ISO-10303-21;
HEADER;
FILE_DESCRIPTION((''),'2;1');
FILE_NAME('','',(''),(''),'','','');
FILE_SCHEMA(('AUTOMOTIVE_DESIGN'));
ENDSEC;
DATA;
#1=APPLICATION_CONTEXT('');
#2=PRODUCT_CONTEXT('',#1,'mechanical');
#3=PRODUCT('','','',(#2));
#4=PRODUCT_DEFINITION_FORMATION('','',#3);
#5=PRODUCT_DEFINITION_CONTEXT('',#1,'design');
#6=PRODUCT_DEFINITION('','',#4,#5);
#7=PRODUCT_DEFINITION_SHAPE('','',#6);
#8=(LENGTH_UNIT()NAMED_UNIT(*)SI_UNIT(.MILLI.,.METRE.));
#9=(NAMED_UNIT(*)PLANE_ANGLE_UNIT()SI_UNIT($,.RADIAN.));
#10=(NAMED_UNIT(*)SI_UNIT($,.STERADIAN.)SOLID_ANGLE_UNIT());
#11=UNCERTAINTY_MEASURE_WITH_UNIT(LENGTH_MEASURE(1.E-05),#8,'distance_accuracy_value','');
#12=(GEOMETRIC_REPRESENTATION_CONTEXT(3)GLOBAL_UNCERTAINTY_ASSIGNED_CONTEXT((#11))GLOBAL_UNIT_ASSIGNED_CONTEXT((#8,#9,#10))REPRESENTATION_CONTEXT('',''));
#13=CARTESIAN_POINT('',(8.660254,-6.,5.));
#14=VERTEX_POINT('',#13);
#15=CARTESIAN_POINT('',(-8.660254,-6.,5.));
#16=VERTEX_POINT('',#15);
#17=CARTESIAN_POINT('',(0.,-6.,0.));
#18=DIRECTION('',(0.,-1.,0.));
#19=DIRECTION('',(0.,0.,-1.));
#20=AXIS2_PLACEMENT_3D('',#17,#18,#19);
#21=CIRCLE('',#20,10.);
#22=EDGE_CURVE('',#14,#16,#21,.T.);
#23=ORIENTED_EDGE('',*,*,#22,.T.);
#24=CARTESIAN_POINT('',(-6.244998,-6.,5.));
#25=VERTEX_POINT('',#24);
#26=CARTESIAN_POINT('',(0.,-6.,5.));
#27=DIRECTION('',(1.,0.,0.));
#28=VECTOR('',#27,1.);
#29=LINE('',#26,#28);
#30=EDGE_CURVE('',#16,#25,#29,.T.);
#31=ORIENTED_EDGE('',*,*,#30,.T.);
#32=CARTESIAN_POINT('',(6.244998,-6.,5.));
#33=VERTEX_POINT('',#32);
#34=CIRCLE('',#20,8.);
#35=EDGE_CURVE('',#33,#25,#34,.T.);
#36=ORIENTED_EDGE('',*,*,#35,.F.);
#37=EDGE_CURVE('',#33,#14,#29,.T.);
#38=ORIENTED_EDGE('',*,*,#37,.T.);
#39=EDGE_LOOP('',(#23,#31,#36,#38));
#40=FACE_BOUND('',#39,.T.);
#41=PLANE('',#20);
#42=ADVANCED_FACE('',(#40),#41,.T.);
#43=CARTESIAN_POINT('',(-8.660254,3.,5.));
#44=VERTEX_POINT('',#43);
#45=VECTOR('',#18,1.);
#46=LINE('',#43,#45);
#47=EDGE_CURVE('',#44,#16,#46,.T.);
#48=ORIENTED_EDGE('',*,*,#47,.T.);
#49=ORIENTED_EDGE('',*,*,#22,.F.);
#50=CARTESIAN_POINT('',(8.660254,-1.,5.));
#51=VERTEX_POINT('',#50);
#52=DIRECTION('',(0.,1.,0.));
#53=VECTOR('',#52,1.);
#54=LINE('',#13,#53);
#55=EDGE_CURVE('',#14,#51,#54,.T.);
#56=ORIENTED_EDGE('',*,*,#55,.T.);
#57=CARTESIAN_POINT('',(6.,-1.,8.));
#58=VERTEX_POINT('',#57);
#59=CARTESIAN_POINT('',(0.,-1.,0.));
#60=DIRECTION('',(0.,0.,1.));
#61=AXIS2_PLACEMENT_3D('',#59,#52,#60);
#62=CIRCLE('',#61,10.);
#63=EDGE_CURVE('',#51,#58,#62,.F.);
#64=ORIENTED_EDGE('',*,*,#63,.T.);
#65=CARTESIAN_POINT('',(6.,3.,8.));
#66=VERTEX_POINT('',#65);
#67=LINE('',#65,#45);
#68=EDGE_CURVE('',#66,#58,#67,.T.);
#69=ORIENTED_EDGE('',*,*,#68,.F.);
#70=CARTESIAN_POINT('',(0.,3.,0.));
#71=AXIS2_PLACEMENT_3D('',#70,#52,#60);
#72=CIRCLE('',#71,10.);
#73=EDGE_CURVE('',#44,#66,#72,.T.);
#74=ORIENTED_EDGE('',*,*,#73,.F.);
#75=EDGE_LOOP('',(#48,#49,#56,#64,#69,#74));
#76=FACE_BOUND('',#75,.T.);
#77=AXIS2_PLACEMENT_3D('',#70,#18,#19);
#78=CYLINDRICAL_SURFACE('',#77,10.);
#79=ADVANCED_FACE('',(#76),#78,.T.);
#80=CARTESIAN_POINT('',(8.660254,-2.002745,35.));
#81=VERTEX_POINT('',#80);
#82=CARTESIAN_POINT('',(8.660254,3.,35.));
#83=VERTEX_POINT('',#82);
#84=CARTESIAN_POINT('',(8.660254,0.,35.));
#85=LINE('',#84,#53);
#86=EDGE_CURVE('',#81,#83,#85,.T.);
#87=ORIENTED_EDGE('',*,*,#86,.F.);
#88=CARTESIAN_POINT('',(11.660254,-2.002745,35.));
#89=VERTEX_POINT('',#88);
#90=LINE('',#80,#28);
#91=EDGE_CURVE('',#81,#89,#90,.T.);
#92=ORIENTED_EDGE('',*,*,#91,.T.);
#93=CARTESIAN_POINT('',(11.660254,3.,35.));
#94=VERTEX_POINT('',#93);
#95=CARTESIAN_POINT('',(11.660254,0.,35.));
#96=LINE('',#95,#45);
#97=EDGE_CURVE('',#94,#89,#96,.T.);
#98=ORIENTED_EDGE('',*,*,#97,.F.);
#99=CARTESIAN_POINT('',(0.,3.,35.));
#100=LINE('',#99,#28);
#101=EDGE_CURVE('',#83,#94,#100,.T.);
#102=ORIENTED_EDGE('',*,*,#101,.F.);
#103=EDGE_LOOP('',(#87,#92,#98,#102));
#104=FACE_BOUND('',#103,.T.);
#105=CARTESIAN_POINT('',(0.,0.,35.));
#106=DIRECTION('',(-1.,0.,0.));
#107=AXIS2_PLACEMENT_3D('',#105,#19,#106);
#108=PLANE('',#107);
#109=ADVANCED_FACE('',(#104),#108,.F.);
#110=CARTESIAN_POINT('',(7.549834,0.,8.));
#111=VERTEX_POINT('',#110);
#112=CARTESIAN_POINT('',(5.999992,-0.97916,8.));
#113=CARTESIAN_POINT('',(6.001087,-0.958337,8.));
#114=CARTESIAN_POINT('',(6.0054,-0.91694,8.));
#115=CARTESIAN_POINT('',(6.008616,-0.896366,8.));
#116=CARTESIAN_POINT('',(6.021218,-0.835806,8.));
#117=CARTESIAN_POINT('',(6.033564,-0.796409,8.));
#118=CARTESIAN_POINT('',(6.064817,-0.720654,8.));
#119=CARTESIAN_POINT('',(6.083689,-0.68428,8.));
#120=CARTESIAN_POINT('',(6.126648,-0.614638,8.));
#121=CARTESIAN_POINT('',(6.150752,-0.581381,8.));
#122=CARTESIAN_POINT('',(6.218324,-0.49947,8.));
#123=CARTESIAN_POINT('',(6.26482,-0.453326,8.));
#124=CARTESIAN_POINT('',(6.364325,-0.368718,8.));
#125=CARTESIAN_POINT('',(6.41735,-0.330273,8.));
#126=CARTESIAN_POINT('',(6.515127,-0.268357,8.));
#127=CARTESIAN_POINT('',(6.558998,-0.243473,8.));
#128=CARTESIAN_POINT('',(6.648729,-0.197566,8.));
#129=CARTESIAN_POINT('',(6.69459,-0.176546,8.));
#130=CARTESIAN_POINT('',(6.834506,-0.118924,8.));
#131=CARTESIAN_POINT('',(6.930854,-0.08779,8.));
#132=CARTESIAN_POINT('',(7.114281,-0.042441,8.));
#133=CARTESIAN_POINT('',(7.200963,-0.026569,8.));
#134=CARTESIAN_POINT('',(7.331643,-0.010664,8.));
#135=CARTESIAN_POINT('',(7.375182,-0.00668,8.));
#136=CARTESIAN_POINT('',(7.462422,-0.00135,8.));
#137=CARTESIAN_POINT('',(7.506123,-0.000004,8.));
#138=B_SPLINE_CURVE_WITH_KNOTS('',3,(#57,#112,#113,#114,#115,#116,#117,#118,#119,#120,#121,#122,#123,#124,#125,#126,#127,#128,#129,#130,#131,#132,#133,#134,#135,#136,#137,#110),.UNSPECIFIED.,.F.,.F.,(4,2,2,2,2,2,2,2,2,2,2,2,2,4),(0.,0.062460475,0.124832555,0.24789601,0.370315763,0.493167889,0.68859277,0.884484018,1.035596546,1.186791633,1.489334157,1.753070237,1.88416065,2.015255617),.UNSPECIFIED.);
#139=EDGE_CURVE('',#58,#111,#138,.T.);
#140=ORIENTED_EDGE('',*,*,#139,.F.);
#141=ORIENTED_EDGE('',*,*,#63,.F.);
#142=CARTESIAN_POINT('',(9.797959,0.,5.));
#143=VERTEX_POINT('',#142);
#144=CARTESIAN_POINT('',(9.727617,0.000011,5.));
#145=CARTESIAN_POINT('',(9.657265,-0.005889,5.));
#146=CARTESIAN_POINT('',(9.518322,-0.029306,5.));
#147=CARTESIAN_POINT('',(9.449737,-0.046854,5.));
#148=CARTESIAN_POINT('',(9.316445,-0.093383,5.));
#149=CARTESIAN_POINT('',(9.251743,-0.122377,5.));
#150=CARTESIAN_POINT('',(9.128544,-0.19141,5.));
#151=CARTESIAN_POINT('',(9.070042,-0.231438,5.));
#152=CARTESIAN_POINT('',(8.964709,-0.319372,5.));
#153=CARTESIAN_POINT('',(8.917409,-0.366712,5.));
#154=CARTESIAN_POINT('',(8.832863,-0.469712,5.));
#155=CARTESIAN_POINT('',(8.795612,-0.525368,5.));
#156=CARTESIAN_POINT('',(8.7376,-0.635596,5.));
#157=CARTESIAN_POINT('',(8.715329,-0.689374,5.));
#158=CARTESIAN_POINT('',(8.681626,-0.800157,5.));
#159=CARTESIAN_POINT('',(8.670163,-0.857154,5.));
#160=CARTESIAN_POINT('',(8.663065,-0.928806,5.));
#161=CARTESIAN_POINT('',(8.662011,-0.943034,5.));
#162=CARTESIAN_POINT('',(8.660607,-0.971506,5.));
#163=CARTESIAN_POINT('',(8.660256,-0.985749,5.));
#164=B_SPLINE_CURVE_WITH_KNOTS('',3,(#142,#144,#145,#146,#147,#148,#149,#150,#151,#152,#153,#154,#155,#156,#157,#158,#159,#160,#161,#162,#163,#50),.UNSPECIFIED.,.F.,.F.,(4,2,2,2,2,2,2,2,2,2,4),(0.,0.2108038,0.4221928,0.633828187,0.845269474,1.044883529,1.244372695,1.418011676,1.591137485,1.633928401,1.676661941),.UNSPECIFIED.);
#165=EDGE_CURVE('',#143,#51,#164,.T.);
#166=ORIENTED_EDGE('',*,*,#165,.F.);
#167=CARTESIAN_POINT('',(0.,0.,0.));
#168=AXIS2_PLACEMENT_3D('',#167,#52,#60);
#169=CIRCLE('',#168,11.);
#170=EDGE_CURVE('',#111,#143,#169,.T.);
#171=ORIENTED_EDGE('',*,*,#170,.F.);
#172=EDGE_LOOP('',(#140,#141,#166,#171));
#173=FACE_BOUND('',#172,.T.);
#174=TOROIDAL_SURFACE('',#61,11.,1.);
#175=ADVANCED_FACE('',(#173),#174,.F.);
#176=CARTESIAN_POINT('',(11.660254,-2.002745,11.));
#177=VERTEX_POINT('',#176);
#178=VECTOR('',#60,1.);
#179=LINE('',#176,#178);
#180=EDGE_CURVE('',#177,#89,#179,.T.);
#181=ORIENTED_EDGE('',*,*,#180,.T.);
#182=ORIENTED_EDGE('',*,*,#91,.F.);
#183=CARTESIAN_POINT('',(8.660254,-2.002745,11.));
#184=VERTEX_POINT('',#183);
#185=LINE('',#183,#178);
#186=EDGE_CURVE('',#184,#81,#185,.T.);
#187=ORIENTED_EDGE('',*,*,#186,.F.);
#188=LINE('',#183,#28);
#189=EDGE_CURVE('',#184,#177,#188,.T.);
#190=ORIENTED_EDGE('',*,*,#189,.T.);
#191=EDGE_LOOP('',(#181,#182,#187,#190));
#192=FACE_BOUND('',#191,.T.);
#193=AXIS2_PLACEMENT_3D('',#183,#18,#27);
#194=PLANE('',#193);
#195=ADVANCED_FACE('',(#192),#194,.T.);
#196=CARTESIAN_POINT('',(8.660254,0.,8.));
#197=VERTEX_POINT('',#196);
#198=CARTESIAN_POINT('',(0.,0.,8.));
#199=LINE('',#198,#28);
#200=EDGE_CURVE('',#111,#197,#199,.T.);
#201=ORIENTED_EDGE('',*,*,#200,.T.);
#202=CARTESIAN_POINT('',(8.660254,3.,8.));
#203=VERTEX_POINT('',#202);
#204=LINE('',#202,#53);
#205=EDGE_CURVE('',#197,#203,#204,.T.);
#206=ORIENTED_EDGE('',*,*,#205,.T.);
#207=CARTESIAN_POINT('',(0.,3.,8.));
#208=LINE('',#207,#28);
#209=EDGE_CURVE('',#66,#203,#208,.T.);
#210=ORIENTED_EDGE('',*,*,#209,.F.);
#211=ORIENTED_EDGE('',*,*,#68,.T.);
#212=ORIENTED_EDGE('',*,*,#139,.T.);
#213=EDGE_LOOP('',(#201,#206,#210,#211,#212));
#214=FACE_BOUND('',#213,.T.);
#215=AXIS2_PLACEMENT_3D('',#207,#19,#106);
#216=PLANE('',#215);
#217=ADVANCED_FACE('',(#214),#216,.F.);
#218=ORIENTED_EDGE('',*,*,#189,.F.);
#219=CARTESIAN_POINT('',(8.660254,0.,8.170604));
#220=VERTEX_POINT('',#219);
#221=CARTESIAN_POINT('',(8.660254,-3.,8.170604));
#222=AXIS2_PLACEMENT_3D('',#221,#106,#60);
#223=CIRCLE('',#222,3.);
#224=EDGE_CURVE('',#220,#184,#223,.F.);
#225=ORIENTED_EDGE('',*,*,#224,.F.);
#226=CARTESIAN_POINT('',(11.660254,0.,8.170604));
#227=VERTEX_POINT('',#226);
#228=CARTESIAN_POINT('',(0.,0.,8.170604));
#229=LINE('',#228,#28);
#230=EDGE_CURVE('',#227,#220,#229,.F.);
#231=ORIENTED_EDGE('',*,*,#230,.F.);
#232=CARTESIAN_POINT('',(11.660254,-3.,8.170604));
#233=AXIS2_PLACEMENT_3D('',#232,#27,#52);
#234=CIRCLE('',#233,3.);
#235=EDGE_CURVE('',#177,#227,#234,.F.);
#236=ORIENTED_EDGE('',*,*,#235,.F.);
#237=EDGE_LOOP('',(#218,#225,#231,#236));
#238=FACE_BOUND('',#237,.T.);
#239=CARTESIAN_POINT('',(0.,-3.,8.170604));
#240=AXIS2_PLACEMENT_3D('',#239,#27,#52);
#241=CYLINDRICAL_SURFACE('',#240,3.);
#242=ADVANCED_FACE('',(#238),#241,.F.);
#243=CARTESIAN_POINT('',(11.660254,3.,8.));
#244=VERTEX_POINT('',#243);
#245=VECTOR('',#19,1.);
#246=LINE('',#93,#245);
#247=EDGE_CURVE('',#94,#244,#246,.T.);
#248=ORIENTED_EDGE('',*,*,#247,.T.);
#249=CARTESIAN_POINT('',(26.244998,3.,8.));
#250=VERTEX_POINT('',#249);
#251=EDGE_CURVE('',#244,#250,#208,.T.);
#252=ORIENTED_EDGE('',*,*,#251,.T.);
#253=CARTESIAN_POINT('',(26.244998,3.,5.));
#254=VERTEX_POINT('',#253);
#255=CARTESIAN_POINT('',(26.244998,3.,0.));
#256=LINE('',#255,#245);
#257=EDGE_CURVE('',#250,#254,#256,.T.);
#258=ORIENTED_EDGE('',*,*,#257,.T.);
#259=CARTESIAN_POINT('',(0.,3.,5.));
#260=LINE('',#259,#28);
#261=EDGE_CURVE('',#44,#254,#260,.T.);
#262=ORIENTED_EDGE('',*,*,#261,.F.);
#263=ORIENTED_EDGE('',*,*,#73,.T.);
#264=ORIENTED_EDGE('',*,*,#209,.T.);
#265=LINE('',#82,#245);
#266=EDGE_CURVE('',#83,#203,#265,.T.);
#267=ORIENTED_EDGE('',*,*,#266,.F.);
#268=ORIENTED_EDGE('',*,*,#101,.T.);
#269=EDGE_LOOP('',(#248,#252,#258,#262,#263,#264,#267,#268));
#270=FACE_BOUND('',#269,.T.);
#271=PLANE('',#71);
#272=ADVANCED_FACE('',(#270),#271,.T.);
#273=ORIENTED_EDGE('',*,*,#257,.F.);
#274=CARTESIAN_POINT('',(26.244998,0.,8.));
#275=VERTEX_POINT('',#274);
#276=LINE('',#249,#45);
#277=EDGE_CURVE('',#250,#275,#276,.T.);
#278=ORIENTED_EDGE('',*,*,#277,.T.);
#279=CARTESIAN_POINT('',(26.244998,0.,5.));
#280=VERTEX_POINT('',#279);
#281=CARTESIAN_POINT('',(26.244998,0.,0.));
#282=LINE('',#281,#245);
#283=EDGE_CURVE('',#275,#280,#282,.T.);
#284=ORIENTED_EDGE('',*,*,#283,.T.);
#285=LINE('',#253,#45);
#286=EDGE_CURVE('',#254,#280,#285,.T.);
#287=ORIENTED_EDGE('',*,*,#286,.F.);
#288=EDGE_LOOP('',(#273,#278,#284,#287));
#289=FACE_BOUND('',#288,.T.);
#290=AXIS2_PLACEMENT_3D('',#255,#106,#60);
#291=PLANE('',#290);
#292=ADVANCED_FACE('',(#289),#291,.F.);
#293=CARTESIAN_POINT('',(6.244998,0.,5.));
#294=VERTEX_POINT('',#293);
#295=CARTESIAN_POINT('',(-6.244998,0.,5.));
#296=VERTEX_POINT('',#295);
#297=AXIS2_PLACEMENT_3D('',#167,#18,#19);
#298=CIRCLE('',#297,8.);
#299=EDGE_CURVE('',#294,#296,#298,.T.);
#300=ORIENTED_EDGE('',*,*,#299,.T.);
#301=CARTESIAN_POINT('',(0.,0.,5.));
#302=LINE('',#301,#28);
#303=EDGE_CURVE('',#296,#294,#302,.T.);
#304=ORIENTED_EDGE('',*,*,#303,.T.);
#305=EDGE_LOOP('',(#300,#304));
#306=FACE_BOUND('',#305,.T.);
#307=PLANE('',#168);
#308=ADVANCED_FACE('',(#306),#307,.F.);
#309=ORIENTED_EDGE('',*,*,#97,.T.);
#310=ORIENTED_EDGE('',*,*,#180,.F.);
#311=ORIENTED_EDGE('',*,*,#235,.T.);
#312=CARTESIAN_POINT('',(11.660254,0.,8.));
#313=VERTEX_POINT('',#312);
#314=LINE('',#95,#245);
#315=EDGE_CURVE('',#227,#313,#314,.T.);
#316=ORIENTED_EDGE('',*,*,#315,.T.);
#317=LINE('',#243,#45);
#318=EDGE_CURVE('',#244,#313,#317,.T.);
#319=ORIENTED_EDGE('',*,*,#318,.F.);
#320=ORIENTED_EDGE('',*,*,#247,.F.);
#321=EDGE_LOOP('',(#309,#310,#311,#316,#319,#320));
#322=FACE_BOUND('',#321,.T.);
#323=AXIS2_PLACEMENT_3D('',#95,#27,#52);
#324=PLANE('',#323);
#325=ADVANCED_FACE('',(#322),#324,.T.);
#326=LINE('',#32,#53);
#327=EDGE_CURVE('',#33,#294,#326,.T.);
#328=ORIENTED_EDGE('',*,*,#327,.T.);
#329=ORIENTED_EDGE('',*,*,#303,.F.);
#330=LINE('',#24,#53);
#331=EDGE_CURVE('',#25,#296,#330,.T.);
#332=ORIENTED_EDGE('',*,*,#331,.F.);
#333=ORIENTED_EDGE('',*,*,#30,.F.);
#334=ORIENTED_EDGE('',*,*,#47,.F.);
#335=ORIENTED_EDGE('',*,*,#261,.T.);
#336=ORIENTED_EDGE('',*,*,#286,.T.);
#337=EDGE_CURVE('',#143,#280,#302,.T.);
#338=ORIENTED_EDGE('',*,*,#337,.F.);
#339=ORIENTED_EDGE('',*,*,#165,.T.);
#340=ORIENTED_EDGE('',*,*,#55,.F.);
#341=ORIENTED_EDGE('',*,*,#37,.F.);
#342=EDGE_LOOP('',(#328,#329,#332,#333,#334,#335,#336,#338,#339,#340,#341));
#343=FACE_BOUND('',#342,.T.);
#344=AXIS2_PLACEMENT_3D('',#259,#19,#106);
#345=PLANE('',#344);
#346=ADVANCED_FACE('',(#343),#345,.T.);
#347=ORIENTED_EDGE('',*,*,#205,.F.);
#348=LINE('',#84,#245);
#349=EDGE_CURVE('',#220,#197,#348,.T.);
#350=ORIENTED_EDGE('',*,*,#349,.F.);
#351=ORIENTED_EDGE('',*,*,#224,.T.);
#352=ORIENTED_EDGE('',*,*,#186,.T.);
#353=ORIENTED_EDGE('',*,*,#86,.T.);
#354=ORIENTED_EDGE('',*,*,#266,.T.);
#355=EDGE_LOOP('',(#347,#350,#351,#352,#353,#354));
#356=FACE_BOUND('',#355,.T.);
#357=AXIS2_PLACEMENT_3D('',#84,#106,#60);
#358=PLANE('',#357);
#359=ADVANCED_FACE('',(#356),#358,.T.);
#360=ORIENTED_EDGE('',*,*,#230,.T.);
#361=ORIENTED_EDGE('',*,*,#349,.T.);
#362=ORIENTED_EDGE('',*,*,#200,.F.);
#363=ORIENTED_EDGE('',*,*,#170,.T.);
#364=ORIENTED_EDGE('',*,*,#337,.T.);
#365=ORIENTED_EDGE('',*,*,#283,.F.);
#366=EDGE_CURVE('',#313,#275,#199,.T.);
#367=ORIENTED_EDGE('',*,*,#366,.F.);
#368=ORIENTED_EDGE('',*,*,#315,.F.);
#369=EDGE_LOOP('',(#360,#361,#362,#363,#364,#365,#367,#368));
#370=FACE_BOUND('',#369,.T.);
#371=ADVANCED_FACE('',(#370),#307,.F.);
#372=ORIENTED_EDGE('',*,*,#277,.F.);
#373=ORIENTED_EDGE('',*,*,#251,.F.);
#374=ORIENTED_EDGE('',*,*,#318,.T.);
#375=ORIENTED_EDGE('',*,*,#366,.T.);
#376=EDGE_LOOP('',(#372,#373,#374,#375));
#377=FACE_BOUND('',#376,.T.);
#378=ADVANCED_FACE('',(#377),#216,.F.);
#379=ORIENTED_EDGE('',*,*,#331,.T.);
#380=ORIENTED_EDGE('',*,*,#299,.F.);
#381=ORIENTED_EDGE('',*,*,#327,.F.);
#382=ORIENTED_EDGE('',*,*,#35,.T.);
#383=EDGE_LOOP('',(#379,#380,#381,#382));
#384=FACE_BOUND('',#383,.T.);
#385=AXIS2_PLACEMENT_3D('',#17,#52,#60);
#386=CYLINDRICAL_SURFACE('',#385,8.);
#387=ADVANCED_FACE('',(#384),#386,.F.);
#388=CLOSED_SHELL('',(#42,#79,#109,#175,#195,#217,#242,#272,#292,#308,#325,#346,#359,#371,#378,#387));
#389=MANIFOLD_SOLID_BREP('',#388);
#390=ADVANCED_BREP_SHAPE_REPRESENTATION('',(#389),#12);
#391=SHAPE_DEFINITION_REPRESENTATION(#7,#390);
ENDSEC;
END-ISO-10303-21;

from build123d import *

# Parameters (mm, degrees)
EXTRUDE_1_DEPTH = 3
EXTRUDE_START   = 6
EXTRUDE_2_DEPTH = 6
EXTRUDE_6_DEPTH = 30
FILLET_1_R      = 1
EXTRUDE_9_DEPTH = 24.000000000000007
FILLET_2_R      = 3


with BuildPart() as part:
    # 草图1 → 凸台-拉伸1 (new body)
    with BuildSketch(Plane(origin=(0, 0, 0), x_dir=(1, 0, 0), z_dir=(0, 1, 0))):
        with BuildLine():
            ThreePointArc((-8.660254037844387, -5.000000000000001), (-2.0048037027267505, -9.796977192661679), (5.999999999999981, -8.000000000000014))
            Line((5.999999999999978, -8), (26.244997998398397, -8))
            Line((26.244997998398397, -8), (26.244997998398397, -5))
            Line((26.244997998398397, -5), (-8.660254037844389, -5))
        make_face()
    extrude(amount=EXTRUDE_1_DEPTH)

    # 草图2 → 凸台-拉伸2 (add)
    with BuildSketch(Plane.XZ.offset(EXTRUDE_START)):
        with BuildLine():
            ThreePointArc((6.000000000000001, 7.999999999999999), (-2.0048037027267367, 9.796977192661682), (-8.660254037844386, 5.0000000000000036))
            Line((-8.660254037844387, 5), (-6.244997998398355, 5))
            ThreePointArc((-6.244997998398368, 5.000000000000037), (7.6e-15, 8), (6.244997998398378, 5.000000000000025))
            Line((6.24499799839837, 5), (8.660254037844625, 5))
            ThreePointArc((8.660254037844535, 4.999999999999743), (7.4820292777785, 6.63469953249319), (6.000000000000001, 7.999999999999999))
        make_face()
    extrude(amount=-EXTRUDE_2_DEPTH)

    # 草图3 → 凸台-拉伸6 (add)
    with BuildSketch(Plane(origin=(0, 0, 5), x_dir=(-1, 0, 0), z_dir=(0, 0, -1))):
        Polygon((-8.660254037844387, 0), (-8.660254037844387, 3.000000000000001), (-11.660254037844386, 3), (-11.660254037844384, 0), align=None)
    extrude(amount=-EXTRUDE_6_DEPTH)

    # 圆角1
    fillet_1_edges = [part.edges().sort_by_distance(p)[0] for p in [
        (7.4820292777784605, 0, 6.634699532493231),
    ]]
    fillet(fillet_1_edges, radius=FILLET_1_R)

    # 草图5 → 凸台-拉伸9 (add)
    with BuildSketch(Plane.XY.offset(34.99999999999999)):
        Polygon((8.660254037844387, -2.0027453895176524), (8.660254037844387, 0), (11.660254037844386, 0), (11.660254037844384, -2.002745389517652), align=None)
    extrude(amount=-EXTRUDE_9_DEPTH)

    # 圆角2
    # the kernel refuses this fillet: 3 mm, written as the material it adds along each edge
    with BuildSketch(Plane(origin=(8.660254037844387, 0, 10.999999999999986), x_dir=(0, -1, 0), z_dir=(1, 0, 0))) as fillet_2_piece_1:
        with BuildLine():
            CenterArc((3, 2.8293962680882476), FILLET_2_R, 180, 70.58438351191461)
            Line((0, 2.8293962680882476), (-0.06, 2.8293962680882476))
            Line((-0.06, 2.8293962680882476), (-0.06, 0))
            Line((-0.06, 0), (0, -0.0600000000000005))
            ThreePointArc((0, -0.0600000000000005), (1.0013726947588264, -0.0600000000000005), (1.9828002973080059, -0.05658792536176449))
            Line((1.9828002973080059, -0.05658792536176449), (2.002745389517653, 0))
        make_face()
    extrude(amount=2.9999999999999982)


solid = part.part
